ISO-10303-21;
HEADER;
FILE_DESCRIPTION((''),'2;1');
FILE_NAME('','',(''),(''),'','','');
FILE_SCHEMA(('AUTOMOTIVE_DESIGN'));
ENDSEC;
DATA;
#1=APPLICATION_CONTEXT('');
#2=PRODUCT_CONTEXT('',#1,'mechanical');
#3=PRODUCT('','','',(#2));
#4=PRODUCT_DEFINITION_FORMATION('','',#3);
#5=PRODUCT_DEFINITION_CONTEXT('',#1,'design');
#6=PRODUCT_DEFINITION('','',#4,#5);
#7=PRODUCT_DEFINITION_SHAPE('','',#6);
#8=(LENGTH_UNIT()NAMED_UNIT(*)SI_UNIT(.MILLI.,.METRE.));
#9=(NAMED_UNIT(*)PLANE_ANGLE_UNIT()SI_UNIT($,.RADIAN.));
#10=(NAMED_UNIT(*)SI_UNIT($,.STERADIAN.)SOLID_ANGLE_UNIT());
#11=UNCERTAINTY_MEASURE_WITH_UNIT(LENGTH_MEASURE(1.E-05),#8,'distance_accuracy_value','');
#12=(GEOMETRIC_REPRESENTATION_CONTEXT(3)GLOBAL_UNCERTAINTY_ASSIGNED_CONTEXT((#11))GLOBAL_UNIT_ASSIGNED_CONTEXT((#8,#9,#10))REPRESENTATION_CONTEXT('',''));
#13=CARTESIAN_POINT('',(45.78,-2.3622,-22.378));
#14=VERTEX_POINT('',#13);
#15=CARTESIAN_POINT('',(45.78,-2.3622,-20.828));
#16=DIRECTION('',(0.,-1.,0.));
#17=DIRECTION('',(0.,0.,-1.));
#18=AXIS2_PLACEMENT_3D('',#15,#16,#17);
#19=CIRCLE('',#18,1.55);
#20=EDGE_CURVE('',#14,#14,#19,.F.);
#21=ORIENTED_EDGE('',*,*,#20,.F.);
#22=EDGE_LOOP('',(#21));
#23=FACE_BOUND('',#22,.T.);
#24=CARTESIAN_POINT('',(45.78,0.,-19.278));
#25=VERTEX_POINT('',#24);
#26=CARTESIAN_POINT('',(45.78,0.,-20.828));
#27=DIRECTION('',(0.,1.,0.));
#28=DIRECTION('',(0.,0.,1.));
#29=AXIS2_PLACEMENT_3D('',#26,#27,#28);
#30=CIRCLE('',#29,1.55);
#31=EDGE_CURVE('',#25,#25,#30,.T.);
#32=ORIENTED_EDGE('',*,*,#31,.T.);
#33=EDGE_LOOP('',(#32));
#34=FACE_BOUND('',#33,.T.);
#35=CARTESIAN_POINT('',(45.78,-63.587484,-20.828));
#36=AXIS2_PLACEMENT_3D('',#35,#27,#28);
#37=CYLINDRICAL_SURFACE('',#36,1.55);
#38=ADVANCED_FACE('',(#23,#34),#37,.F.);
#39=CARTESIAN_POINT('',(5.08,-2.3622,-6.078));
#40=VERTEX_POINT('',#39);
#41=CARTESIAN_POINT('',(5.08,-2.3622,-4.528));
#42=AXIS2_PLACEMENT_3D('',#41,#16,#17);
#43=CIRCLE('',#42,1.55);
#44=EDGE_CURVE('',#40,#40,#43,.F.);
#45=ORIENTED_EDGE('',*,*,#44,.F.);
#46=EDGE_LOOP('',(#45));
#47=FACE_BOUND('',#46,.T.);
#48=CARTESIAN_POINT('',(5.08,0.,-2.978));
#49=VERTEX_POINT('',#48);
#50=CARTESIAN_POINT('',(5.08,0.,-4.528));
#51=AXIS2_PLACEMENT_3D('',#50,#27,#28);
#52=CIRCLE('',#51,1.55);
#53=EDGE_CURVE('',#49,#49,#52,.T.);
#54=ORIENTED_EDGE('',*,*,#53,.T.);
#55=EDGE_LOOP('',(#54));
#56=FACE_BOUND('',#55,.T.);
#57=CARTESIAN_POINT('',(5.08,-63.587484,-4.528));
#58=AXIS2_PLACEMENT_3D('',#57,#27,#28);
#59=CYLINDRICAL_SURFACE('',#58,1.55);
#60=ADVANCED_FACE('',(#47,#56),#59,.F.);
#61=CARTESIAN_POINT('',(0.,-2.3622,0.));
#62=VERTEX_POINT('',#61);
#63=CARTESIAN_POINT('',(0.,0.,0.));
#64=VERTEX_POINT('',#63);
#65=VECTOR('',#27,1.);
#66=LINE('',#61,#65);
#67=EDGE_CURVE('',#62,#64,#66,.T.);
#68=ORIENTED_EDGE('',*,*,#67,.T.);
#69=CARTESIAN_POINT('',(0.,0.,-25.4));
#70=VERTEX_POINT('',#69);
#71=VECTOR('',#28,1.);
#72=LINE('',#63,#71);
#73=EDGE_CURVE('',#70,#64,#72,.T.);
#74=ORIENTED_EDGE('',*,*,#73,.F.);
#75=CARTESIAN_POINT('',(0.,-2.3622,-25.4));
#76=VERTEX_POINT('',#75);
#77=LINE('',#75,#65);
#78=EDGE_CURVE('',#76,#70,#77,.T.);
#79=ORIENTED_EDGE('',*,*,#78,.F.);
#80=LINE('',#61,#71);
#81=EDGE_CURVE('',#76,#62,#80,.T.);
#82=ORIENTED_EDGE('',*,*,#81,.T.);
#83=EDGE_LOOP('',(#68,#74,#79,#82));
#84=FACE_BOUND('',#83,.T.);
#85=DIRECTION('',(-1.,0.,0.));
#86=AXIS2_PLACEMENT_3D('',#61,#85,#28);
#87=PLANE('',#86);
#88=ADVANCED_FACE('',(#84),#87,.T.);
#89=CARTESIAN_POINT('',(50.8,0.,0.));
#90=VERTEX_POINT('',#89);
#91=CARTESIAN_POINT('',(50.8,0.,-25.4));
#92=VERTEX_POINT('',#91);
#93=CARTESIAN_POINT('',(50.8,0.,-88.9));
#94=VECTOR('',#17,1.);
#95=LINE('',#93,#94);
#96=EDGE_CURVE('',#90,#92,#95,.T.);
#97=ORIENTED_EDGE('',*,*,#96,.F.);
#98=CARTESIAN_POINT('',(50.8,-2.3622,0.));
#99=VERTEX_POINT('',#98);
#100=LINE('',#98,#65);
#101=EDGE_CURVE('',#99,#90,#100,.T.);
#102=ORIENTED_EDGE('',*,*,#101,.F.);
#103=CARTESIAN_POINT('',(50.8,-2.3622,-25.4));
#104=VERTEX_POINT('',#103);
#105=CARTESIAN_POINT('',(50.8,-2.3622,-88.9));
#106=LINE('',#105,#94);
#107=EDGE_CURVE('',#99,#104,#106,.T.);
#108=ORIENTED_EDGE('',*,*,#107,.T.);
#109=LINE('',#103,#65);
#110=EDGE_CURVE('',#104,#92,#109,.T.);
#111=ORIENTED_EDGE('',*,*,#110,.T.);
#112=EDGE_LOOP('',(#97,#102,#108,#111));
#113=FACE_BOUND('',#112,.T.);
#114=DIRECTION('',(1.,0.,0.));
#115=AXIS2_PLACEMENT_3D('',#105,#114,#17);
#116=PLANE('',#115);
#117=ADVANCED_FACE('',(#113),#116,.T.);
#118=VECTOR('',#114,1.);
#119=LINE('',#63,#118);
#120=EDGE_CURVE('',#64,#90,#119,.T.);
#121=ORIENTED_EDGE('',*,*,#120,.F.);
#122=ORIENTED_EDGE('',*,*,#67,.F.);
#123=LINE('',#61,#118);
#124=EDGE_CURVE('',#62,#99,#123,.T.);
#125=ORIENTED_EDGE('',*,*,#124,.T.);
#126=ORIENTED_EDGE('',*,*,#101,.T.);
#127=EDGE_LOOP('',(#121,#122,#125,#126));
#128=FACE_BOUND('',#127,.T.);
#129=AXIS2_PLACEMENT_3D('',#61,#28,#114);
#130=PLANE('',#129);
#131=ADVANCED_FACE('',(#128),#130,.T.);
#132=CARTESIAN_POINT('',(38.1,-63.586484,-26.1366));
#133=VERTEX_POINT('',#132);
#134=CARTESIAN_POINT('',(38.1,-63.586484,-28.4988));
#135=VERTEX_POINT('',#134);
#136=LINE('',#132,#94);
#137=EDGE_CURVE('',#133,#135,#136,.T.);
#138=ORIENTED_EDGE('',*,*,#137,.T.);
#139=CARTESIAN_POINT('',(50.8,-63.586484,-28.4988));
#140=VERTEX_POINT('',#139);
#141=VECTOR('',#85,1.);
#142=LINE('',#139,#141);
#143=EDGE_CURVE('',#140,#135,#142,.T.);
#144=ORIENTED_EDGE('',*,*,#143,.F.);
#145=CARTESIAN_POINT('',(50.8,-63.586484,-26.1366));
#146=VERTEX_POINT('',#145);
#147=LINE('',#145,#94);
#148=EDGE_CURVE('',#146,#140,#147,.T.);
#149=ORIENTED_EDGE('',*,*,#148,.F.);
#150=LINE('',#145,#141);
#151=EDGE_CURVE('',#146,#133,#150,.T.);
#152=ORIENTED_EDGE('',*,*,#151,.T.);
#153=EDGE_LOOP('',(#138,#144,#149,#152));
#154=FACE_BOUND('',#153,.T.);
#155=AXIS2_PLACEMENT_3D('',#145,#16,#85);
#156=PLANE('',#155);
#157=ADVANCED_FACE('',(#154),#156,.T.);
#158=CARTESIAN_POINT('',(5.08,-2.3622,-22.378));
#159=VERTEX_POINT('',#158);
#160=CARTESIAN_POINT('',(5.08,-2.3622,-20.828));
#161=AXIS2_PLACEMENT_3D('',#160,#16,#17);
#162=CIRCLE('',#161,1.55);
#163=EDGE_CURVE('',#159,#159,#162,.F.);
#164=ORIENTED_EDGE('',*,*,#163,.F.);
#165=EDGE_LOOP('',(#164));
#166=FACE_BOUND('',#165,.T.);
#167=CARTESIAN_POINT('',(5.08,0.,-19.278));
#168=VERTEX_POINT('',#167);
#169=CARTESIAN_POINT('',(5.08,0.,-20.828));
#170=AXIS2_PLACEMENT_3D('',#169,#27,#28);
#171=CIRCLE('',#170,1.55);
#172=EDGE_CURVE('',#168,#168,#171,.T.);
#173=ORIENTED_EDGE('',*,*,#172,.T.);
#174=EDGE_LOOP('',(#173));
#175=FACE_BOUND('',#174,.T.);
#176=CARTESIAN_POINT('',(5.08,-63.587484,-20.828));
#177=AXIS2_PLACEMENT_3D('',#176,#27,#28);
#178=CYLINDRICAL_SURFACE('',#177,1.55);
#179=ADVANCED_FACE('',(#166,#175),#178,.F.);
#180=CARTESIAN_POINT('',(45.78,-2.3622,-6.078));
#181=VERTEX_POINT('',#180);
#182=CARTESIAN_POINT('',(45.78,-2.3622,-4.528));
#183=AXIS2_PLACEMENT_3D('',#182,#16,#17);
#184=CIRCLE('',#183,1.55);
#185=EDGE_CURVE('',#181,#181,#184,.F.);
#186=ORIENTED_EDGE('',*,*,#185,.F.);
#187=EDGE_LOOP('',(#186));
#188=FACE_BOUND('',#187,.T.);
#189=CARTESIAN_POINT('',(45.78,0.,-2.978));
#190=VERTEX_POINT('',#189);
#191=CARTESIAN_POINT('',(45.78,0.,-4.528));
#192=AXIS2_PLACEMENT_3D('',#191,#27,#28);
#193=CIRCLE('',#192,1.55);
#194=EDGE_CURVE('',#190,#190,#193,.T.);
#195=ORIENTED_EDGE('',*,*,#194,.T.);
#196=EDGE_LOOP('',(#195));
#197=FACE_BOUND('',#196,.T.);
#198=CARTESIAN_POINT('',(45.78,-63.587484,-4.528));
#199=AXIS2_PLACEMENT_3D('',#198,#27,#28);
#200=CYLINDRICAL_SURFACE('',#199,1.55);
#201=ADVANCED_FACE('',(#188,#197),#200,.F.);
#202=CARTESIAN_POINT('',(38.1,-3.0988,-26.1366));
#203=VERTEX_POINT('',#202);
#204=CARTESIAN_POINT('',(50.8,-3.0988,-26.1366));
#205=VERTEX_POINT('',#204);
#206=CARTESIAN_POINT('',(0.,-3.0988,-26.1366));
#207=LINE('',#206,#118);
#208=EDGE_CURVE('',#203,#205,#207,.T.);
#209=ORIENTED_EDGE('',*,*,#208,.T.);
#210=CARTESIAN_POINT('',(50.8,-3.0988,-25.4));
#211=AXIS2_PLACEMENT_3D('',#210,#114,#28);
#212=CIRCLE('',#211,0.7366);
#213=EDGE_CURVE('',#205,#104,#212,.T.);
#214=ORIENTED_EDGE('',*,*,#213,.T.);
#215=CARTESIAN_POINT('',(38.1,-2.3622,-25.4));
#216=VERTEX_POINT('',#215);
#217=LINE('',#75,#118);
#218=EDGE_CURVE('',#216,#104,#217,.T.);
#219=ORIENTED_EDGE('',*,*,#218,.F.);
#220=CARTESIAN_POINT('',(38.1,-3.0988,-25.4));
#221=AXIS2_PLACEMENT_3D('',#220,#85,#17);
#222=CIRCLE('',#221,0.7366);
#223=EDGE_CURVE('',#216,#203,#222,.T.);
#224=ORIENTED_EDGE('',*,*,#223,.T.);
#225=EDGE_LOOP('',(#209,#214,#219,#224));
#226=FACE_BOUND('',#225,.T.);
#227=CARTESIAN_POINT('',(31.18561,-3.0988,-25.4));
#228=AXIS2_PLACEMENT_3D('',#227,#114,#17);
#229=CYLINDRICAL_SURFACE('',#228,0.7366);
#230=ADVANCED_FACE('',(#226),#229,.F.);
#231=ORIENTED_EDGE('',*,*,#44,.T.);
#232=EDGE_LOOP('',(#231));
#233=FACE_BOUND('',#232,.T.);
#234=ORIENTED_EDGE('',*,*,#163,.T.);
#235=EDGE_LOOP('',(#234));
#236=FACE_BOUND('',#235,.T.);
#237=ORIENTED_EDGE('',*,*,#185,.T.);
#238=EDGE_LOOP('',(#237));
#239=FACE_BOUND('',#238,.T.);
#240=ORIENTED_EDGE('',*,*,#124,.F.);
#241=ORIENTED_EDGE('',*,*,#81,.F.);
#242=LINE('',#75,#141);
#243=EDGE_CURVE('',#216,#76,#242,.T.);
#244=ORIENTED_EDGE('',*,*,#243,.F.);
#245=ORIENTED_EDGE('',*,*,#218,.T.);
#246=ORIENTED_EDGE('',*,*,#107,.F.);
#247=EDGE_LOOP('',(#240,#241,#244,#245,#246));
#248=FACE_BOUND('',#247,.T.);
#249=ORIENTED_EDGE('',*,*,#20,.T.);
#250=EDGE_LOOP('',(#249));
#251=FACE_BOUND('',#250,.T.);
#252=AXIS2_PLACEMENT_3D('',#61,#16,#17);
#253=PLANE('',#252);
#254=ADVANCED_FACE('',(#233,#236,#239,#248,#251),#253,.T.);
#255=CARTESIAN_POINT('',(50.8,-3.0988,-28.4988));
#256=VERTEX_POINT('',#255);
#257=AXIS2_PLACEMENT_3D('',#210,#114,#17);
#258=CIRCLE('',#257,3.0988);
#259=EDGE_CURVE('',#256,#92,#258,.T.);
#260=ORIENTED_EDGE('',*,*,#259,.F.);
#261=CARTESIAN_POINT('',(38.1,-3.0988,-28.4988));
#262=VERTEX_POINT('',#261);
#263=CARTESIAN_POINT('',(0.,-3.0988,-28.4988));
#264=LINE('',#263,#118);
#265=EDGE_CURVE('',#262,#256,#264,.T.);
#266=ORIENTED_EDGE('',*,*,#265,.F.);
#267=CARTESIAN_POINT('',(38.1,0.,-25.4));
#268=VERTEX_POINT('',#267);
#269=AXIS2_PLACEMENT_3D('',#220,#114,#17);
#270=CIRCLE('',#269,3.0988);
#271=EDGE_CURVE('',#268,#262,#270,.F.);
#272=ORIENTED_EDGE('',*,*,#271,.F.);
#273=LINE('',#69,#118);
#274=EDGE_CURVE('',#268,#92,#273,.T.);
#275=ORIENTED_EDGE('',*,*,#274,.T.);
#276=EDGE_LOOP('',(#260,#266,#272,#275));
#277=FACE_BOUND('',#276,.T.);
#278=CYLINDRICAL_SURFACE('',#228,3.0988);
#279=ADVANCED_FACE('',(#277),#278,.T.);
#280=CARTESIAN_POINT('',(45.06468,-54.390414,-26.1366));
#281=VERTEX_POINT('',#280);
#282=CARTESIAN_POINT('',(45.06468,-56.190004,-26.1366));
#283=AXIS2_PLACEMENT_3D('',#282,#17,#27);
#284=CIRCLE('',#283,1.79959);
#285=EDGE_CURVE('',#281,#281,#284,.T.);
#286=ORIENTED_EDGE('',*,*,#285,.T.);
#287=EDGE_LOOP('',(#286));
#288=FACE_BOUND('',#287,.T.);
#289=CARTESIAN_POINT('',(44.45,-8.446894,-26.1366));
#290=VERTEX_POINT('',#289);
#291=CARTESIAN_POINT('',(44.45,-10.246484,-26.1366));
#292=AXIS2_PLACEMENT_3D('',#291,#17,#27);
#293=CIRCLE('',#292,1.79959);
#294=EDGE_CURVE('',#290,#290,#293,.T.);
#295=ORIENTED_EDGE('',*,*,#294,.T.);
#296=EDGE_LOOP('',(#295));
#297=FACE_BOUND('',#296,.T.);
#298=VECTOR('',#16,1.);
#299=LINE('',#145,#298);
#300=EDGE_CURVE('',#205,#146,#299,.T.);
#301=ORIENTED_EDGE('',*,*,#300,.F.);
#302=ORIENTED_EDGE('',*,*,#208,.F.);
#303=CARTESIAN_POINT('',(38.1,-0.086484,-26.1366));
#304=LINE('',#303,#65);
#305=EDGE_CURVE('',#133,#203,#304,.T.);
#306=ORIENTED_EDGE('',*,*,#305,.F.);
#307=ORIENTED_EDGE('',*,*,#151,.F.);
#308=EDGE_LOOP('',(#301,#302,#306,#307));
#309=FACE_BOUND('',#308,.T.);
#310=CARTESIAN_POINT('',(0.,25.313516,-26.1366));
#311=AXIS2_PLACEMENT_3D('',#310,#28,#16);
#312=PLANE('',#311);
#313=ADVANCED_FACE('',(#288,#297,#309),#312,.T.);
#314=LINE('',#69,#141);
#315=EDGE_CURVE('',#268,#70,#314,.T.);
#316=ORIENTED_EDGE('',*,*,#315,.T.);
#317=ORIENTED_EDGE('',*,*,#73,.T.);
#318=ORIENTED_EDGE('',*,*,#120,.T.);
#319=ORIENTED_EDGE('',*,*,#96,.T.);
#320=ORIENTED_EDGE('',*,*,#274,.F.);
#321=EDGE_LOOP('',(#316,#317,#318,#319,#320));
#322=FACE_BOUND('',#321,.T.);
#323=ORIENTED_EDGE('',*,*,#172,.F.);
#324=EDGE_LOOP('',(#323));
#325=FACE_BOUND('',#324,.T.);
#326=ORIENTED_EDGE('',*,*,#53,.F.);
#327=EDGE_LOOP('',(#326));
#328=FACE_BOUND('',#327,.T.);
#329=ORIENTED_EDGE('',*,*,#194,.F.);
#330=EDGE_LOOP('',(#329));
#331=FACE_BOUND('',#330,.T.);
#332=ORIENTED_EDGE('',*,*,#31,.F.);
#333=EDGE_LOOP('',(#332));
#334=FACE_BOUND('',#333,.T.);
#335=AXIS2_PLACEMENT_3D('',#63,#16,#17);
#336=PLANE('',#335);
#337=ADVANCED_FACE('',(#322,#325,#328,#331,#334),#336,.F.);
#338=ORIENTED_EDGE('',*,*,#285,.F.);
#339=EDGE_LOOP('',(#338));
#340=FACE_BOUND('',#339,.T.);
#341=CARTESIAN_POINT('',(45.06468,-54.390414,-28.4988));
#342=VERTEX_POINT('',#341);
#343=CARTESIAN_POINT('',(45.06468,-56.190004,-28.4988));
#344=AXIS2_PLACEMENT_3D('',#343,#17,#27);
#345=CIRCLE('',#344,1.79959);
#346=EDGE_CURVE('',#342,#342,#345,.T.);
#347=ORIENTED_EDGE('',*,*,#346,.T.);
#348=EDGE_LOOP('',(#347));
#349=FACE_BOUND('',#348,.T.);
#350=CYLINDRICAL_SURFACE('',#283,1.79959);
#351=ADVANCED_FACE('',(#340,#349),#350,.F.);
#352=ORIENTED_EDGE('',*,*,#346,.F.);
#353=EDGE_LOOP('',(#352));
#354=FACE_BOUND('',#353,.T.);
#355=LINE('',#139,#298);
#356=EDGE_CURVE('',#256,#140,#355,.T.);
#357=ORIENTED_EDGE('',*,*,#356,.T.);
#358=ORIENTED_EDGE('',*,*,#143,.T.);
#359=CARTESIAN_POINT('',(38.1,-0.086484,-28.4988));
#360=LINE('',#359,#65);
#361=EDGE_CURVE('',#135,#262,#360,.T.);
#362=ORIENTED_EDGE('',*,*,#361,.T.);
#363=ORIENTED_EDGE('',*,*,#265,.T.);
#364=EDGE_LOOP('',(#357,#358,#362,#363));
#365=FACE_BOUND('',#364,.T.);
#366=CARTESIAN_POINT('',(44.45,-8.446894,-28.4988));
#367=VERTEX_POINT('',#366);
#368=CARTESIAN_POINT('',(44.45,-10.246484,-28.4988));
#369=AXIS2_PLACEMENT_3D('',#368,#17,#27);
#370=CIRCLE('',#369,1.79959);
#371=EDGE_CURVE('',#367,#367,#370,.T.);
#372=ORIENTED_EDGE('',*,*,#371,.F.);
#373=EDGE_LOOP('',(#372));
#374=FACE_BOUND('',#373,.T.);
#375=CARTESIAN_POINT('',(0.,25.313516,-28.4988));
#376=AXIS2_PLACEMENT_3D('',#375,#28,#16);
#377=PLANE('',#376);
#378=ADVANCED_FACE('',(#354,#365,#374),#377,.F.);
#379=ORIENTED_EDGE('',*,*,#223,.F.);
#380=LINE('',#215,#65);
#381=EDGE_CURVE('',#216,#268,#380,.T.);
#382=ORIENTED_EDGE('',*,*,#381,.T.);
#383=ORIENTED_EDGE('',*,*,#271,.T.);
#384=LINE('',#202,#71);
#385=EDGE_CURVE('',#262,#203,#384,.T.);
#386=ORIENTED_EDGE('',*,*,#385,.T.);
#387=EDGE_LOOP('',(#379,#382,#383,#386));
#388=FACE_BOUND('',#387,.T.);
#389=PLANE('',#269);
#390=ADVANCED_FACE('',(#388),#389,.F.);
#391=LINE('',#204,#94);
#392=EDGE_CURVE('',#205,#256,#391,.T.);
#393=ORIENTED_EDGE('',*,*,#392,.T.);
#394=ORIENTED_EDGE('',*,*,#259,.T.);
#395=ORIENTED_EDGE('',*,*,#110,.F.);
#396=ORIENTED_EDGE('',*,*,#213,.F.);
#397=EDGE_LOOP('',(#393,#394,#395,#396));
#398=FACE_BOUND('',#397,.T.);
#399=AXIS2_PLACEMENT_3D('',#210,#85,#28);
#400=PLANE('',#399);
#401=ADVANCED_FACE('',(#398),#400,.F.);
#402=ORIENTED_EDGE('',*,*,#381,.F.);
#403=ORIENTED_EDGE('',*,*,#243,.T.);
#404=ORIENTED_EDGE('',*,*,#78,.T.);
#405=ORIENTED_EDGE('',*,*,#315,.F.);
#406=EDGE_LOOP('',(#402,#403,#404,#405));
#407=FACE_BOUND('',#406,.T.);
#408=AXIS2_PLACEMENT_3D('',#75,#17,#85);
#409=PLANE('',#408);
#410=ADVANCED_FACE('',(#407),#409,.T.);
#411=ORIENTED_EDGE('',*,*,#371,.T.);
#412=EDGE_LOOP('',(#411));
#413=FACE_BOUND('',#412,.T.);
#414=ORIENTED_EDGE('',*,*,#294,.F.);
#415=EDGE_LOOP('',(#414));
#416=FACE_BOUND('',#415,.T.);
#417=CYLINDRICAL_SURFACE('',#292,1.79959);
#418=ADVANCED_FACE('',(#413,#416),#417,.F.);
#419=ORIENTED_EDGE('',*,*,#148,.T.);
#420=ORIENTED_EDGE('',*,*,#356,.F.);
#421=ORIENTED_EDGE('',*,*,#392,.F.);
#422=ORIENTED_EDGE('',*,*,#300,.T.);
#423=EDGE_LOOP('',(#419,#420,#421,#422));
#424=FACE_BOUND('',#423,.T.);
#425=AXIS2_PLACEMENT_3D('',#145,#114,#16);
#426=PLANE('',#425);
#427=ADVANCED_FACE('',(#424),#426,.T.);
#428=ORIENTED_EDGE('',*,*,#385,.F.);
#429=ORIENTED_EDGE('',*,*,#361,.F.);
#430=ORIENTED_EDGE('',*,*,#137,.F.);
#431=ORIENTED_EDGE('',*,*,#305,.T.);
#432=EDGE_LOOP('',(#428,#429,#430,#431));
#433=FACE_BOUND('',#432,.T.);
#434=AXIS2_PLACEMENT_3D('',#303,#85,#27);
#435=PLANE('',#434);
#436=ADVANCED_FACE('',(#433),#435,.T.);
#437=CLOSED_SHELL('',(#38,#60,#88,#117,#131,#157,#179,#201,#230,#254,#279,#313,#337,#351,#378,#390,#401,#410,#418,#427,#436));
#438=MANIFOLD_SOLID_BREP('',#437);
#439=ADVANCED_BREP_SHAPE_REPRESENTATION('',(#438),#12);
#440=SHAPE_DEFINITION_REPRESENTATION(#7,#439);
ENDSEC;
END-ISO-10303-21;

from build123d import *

# Parameters (mm, degrees)
SKETCH1_R                  = 1.79959
BASE_FLANGE1_DEPTH         = 2.3622
SKETCHED_START             = -88.9
SKETCHED_BEND1_OUTLINE_W   = 12.7
SKETCHED_BEND1_OUTLINE_H   = 2.3622
SKETCHED_BEND1_DEPTH       = 60.4012
SKETCHED_START_2           = -28.197410712
SKETCHED_BEND1_2_OUTLINE_W = 12.7
SKETCHED_BEND1_2_OUTLINE_H = 61.224283884
SKETCHED_BEND1_2_OUTLINE_R = 1.79959
SKETCHED_BEND1_2_DEPTH     = 2.060810712
SKETCHED_START_3           = -28.4988
SKETCHED_BEND1_3_OUTLINE_W = 12.7
SKETCHED_BEND1_3_OUTLINE_H = 61.224283884
SKETCHED_BEND1_3_OUTLINE_R = 1.79959
SKETCHED_BEND1_3_DEPTH     = 3.0988
SKETCHED_START_4           = 38.1
SKETCHED_BEND1_4_DEPTH     = 12.7
CUT_EXTRUDE1_REACH         = 88.233
SKETCH7_R                  = 1.55


with BuildPart() as part:
    # Base-Flange1: sheet metal written as solids
    # Sketch1 → Base-Flange1 (new body)
    with BuildSketch(Plane(origin=(0, 0, 0), x_dir=(1, 0, 0), z_dir=(0, 1, 0))):
        Polygon((50.8, 88.9), (50.8, 0), (0, 0), (0, 25.4), (38.1, 25.4), (38.1, 88.9), align=None)
        with Locations(Location((45.06468, 81.50352, 0), (0, 0, 270))):
            Circle(SKETCH1_R, mode=Mode.SUBTRACT)
        with Locations(Location((44.45, 35.56, 0), (0, 0, 270))):
            Circle(SKETCH1_R, mode=Mode.SUBTRACT)
    extrude(amount=-BASE_FLANGE1_DEPTH)

    # Sketched Bend1: read off the stored shape, not the designer's step
    # Sketched Bend1 outline → Sketched Bend1 (cut)
    with BuildSketch(Plane.XY.offset(SKETCHED_START)):
        with Locations((44.45, -1.1811)):
            Rectangle(SKETCHED_BEND1_OUTLINE_W, SKETCHED_BEND1_OUTLINE_H)
    extrude(amount=SKETCHED_BEND1_DEPTH, mode=Mode.SUBTRACT)

    # Sketched Bend1 2 outline → Sketched Bend1 2 (add)
    with BuildSketch(Plane.XY.offset(SKETCHED_START_2)):
        with Locations((44.45, -32.974341942)):
            Rectangle(SKETCHED_BEND1_2_OUTLINE_W, SKETCHED_BEND1_2_OUTLINE_H)
        with Locations((45.06468, -56.190003884)):
            Circle(SKETCHED_BEND1_2_OUTLINE_R, mode=Mode.SUBTRACT)
        with Locations((44.45, -10.246483884)):
            Circle(SKETCHED_BEND1_2_OUTLINE_R, mode=Mode.SUBTRACT)
    extrude(amount=SKETCHED_BEND1_2_DEPTH)

    # Sketched Bend1 3 outline → Sketched Bend1 3 (add)
    with BuildSketch(Plane.XY.offset(SKETCHED_START_3)):
        with Locations((44.45, -32.974341942)):
            Rectangle(SKETCHED_BEND1_3_OUTLINE_W, SKETCHED_BEND1_3_OUTLINE_H)
        with Locations((45.06468, -56.190003884)):
            Circle(SKETCHED_BEND1_3_OUTLINE_R, mode=Mode.SUBTRACT)
        with Locations((44.45, -10.246483884)):
            Circle(SKETCHED_BEND1_3_OUTLINE_R, mode=Mode.SUBTRACT)
    extrude(amount=SKETCHED_BEND1_3_DEPTH)

    # Sketched Bend1 4 outline → Sketched Bend1 4 (cut)
    with BuildSketch(Plane.YZ.offset(SKETCHED_START_4)):
        with BuildLine():
            ThreePointArc((0, -25.4), (-0.907617506, -27.591182494), (-3.0988, -28.4988))
            Line((-3.0988, -28.4988), (0, -28.4988))
            Line((0, -28.4988), (0, -25.4))
        make_face()
        with BuildLine():
            Line((-63.586483884, -26.1366), (-3.0988, -26.1366))
            ThreePointArc((-3.0988, -26.1366), (-2.577945145, -25.920854855), (-2.3622, -25.4))
            Line((-2.3622, -25.4), (-63.586483884, -25.4))
            Line((-63.586483884, -25.4), (-63.586483884, -26.1366))
        make_face()
    extrude(amount=SKETCHED_BEND1_4_DEPTH, mode=Mode.SUBTRACT)

    # Sketch7 → Cut-Extrude1 (cut, up to next)
    with BuildSketch(Plane(origin=(0, 0, 0), x_dir=(1, 0, 0), z_dir=(0, 1, 0)), mode=Mode.PRIVATE) as cut_extrude1_sk1:
        with Locations(Location((45.78, 20.828, 0), (0, 0, 270))):
            Circle(SKETCH7_R)
    cut_extrude1_tool1 = extrude(cut_extrude1_sk1.sketch, amount=-CUT_EXTRUDE1_REACH, mode=Mode.PRIVATE) & part.part
    # Sketch7 → Cut-Extrude1 (cut, up to next)
    with BuildSketch(Plane(origin=(0, 0, 0), x_dir=(1, 0, 0), z_dir=(0, 1, 0)), mode=Mode.PRIVATE) as cut_extrude1_sk2:
        with Locations(Location((5.08, 4.528, 0), (0, 0, 270))):
            Circle(SKETCH7_R)
    cut_extrude1_tool2 = extrude(cut_extrude1_sk2.sketch, amount=-CUT_EXTRUDE1_REACH, mode=Mode.PRIVATE) & part.part
    # Sketch7 → Cut-Extrude1 (cut, up to next)
    with BuildSketch(Plane(origin=(0, 0, 0), x_dir=(1, 0, 0), z_dir=(0, 1, 0)), mode=Mode.PRIVATE) as cut_extrude1_sk3:
        with Locations(Location((45.78, 4.528, 0), (0, 0, 270))):
            Circle(SKETCH7_R)
    cut_extrude1_tool3 = extrude(cut_extrude1_sk3.sketch, amount=-CUT_EXTRUDE1_REACH, mode=Mode.PRIVATE) & part.part
    # Sketch7 → Cut-Extrude1 (cut, up to next)
    with BuildSketch(Plane(origin=(0, 0, 0), x_dir=(1, 0, 0), z_dir=(0, 1, 0)), mode=Mode.PRIVATE) as cut_extrude1_sk4:
        with Locations(Location((5.08, 20.828, 0), (0, 0, 270))):
            Circle(SKETCH7_R)
    cut_extrude1_tool4 = extrude(cut_extrude1_sk4.sketch, amount=-CUT_EXTRUDE1_REACH, mode=Mode.PRIVATE) & part.part
    add(cut_extrude1_tool1.solids().sort_by_distance((45.78, 0, -20.828))[0], mode=Mode.SUBTRACT)
    add(cut_extrude1_tool2.solids().sort_by_distance((5.08, 0, -4.528))[0], mode=Mode.SUBTRACT)
    add(cut_extrude1_tool3.solids().sort_by_distance((45.78, 0, -4.528))[0], mode=Mode.SUBTRACT)
    add(cut_extrude1_tool4.solids().sort_by_distance((5.08, 0, -20.828))[0], mode=Mode.SUBTRACT)


solid = part.part
